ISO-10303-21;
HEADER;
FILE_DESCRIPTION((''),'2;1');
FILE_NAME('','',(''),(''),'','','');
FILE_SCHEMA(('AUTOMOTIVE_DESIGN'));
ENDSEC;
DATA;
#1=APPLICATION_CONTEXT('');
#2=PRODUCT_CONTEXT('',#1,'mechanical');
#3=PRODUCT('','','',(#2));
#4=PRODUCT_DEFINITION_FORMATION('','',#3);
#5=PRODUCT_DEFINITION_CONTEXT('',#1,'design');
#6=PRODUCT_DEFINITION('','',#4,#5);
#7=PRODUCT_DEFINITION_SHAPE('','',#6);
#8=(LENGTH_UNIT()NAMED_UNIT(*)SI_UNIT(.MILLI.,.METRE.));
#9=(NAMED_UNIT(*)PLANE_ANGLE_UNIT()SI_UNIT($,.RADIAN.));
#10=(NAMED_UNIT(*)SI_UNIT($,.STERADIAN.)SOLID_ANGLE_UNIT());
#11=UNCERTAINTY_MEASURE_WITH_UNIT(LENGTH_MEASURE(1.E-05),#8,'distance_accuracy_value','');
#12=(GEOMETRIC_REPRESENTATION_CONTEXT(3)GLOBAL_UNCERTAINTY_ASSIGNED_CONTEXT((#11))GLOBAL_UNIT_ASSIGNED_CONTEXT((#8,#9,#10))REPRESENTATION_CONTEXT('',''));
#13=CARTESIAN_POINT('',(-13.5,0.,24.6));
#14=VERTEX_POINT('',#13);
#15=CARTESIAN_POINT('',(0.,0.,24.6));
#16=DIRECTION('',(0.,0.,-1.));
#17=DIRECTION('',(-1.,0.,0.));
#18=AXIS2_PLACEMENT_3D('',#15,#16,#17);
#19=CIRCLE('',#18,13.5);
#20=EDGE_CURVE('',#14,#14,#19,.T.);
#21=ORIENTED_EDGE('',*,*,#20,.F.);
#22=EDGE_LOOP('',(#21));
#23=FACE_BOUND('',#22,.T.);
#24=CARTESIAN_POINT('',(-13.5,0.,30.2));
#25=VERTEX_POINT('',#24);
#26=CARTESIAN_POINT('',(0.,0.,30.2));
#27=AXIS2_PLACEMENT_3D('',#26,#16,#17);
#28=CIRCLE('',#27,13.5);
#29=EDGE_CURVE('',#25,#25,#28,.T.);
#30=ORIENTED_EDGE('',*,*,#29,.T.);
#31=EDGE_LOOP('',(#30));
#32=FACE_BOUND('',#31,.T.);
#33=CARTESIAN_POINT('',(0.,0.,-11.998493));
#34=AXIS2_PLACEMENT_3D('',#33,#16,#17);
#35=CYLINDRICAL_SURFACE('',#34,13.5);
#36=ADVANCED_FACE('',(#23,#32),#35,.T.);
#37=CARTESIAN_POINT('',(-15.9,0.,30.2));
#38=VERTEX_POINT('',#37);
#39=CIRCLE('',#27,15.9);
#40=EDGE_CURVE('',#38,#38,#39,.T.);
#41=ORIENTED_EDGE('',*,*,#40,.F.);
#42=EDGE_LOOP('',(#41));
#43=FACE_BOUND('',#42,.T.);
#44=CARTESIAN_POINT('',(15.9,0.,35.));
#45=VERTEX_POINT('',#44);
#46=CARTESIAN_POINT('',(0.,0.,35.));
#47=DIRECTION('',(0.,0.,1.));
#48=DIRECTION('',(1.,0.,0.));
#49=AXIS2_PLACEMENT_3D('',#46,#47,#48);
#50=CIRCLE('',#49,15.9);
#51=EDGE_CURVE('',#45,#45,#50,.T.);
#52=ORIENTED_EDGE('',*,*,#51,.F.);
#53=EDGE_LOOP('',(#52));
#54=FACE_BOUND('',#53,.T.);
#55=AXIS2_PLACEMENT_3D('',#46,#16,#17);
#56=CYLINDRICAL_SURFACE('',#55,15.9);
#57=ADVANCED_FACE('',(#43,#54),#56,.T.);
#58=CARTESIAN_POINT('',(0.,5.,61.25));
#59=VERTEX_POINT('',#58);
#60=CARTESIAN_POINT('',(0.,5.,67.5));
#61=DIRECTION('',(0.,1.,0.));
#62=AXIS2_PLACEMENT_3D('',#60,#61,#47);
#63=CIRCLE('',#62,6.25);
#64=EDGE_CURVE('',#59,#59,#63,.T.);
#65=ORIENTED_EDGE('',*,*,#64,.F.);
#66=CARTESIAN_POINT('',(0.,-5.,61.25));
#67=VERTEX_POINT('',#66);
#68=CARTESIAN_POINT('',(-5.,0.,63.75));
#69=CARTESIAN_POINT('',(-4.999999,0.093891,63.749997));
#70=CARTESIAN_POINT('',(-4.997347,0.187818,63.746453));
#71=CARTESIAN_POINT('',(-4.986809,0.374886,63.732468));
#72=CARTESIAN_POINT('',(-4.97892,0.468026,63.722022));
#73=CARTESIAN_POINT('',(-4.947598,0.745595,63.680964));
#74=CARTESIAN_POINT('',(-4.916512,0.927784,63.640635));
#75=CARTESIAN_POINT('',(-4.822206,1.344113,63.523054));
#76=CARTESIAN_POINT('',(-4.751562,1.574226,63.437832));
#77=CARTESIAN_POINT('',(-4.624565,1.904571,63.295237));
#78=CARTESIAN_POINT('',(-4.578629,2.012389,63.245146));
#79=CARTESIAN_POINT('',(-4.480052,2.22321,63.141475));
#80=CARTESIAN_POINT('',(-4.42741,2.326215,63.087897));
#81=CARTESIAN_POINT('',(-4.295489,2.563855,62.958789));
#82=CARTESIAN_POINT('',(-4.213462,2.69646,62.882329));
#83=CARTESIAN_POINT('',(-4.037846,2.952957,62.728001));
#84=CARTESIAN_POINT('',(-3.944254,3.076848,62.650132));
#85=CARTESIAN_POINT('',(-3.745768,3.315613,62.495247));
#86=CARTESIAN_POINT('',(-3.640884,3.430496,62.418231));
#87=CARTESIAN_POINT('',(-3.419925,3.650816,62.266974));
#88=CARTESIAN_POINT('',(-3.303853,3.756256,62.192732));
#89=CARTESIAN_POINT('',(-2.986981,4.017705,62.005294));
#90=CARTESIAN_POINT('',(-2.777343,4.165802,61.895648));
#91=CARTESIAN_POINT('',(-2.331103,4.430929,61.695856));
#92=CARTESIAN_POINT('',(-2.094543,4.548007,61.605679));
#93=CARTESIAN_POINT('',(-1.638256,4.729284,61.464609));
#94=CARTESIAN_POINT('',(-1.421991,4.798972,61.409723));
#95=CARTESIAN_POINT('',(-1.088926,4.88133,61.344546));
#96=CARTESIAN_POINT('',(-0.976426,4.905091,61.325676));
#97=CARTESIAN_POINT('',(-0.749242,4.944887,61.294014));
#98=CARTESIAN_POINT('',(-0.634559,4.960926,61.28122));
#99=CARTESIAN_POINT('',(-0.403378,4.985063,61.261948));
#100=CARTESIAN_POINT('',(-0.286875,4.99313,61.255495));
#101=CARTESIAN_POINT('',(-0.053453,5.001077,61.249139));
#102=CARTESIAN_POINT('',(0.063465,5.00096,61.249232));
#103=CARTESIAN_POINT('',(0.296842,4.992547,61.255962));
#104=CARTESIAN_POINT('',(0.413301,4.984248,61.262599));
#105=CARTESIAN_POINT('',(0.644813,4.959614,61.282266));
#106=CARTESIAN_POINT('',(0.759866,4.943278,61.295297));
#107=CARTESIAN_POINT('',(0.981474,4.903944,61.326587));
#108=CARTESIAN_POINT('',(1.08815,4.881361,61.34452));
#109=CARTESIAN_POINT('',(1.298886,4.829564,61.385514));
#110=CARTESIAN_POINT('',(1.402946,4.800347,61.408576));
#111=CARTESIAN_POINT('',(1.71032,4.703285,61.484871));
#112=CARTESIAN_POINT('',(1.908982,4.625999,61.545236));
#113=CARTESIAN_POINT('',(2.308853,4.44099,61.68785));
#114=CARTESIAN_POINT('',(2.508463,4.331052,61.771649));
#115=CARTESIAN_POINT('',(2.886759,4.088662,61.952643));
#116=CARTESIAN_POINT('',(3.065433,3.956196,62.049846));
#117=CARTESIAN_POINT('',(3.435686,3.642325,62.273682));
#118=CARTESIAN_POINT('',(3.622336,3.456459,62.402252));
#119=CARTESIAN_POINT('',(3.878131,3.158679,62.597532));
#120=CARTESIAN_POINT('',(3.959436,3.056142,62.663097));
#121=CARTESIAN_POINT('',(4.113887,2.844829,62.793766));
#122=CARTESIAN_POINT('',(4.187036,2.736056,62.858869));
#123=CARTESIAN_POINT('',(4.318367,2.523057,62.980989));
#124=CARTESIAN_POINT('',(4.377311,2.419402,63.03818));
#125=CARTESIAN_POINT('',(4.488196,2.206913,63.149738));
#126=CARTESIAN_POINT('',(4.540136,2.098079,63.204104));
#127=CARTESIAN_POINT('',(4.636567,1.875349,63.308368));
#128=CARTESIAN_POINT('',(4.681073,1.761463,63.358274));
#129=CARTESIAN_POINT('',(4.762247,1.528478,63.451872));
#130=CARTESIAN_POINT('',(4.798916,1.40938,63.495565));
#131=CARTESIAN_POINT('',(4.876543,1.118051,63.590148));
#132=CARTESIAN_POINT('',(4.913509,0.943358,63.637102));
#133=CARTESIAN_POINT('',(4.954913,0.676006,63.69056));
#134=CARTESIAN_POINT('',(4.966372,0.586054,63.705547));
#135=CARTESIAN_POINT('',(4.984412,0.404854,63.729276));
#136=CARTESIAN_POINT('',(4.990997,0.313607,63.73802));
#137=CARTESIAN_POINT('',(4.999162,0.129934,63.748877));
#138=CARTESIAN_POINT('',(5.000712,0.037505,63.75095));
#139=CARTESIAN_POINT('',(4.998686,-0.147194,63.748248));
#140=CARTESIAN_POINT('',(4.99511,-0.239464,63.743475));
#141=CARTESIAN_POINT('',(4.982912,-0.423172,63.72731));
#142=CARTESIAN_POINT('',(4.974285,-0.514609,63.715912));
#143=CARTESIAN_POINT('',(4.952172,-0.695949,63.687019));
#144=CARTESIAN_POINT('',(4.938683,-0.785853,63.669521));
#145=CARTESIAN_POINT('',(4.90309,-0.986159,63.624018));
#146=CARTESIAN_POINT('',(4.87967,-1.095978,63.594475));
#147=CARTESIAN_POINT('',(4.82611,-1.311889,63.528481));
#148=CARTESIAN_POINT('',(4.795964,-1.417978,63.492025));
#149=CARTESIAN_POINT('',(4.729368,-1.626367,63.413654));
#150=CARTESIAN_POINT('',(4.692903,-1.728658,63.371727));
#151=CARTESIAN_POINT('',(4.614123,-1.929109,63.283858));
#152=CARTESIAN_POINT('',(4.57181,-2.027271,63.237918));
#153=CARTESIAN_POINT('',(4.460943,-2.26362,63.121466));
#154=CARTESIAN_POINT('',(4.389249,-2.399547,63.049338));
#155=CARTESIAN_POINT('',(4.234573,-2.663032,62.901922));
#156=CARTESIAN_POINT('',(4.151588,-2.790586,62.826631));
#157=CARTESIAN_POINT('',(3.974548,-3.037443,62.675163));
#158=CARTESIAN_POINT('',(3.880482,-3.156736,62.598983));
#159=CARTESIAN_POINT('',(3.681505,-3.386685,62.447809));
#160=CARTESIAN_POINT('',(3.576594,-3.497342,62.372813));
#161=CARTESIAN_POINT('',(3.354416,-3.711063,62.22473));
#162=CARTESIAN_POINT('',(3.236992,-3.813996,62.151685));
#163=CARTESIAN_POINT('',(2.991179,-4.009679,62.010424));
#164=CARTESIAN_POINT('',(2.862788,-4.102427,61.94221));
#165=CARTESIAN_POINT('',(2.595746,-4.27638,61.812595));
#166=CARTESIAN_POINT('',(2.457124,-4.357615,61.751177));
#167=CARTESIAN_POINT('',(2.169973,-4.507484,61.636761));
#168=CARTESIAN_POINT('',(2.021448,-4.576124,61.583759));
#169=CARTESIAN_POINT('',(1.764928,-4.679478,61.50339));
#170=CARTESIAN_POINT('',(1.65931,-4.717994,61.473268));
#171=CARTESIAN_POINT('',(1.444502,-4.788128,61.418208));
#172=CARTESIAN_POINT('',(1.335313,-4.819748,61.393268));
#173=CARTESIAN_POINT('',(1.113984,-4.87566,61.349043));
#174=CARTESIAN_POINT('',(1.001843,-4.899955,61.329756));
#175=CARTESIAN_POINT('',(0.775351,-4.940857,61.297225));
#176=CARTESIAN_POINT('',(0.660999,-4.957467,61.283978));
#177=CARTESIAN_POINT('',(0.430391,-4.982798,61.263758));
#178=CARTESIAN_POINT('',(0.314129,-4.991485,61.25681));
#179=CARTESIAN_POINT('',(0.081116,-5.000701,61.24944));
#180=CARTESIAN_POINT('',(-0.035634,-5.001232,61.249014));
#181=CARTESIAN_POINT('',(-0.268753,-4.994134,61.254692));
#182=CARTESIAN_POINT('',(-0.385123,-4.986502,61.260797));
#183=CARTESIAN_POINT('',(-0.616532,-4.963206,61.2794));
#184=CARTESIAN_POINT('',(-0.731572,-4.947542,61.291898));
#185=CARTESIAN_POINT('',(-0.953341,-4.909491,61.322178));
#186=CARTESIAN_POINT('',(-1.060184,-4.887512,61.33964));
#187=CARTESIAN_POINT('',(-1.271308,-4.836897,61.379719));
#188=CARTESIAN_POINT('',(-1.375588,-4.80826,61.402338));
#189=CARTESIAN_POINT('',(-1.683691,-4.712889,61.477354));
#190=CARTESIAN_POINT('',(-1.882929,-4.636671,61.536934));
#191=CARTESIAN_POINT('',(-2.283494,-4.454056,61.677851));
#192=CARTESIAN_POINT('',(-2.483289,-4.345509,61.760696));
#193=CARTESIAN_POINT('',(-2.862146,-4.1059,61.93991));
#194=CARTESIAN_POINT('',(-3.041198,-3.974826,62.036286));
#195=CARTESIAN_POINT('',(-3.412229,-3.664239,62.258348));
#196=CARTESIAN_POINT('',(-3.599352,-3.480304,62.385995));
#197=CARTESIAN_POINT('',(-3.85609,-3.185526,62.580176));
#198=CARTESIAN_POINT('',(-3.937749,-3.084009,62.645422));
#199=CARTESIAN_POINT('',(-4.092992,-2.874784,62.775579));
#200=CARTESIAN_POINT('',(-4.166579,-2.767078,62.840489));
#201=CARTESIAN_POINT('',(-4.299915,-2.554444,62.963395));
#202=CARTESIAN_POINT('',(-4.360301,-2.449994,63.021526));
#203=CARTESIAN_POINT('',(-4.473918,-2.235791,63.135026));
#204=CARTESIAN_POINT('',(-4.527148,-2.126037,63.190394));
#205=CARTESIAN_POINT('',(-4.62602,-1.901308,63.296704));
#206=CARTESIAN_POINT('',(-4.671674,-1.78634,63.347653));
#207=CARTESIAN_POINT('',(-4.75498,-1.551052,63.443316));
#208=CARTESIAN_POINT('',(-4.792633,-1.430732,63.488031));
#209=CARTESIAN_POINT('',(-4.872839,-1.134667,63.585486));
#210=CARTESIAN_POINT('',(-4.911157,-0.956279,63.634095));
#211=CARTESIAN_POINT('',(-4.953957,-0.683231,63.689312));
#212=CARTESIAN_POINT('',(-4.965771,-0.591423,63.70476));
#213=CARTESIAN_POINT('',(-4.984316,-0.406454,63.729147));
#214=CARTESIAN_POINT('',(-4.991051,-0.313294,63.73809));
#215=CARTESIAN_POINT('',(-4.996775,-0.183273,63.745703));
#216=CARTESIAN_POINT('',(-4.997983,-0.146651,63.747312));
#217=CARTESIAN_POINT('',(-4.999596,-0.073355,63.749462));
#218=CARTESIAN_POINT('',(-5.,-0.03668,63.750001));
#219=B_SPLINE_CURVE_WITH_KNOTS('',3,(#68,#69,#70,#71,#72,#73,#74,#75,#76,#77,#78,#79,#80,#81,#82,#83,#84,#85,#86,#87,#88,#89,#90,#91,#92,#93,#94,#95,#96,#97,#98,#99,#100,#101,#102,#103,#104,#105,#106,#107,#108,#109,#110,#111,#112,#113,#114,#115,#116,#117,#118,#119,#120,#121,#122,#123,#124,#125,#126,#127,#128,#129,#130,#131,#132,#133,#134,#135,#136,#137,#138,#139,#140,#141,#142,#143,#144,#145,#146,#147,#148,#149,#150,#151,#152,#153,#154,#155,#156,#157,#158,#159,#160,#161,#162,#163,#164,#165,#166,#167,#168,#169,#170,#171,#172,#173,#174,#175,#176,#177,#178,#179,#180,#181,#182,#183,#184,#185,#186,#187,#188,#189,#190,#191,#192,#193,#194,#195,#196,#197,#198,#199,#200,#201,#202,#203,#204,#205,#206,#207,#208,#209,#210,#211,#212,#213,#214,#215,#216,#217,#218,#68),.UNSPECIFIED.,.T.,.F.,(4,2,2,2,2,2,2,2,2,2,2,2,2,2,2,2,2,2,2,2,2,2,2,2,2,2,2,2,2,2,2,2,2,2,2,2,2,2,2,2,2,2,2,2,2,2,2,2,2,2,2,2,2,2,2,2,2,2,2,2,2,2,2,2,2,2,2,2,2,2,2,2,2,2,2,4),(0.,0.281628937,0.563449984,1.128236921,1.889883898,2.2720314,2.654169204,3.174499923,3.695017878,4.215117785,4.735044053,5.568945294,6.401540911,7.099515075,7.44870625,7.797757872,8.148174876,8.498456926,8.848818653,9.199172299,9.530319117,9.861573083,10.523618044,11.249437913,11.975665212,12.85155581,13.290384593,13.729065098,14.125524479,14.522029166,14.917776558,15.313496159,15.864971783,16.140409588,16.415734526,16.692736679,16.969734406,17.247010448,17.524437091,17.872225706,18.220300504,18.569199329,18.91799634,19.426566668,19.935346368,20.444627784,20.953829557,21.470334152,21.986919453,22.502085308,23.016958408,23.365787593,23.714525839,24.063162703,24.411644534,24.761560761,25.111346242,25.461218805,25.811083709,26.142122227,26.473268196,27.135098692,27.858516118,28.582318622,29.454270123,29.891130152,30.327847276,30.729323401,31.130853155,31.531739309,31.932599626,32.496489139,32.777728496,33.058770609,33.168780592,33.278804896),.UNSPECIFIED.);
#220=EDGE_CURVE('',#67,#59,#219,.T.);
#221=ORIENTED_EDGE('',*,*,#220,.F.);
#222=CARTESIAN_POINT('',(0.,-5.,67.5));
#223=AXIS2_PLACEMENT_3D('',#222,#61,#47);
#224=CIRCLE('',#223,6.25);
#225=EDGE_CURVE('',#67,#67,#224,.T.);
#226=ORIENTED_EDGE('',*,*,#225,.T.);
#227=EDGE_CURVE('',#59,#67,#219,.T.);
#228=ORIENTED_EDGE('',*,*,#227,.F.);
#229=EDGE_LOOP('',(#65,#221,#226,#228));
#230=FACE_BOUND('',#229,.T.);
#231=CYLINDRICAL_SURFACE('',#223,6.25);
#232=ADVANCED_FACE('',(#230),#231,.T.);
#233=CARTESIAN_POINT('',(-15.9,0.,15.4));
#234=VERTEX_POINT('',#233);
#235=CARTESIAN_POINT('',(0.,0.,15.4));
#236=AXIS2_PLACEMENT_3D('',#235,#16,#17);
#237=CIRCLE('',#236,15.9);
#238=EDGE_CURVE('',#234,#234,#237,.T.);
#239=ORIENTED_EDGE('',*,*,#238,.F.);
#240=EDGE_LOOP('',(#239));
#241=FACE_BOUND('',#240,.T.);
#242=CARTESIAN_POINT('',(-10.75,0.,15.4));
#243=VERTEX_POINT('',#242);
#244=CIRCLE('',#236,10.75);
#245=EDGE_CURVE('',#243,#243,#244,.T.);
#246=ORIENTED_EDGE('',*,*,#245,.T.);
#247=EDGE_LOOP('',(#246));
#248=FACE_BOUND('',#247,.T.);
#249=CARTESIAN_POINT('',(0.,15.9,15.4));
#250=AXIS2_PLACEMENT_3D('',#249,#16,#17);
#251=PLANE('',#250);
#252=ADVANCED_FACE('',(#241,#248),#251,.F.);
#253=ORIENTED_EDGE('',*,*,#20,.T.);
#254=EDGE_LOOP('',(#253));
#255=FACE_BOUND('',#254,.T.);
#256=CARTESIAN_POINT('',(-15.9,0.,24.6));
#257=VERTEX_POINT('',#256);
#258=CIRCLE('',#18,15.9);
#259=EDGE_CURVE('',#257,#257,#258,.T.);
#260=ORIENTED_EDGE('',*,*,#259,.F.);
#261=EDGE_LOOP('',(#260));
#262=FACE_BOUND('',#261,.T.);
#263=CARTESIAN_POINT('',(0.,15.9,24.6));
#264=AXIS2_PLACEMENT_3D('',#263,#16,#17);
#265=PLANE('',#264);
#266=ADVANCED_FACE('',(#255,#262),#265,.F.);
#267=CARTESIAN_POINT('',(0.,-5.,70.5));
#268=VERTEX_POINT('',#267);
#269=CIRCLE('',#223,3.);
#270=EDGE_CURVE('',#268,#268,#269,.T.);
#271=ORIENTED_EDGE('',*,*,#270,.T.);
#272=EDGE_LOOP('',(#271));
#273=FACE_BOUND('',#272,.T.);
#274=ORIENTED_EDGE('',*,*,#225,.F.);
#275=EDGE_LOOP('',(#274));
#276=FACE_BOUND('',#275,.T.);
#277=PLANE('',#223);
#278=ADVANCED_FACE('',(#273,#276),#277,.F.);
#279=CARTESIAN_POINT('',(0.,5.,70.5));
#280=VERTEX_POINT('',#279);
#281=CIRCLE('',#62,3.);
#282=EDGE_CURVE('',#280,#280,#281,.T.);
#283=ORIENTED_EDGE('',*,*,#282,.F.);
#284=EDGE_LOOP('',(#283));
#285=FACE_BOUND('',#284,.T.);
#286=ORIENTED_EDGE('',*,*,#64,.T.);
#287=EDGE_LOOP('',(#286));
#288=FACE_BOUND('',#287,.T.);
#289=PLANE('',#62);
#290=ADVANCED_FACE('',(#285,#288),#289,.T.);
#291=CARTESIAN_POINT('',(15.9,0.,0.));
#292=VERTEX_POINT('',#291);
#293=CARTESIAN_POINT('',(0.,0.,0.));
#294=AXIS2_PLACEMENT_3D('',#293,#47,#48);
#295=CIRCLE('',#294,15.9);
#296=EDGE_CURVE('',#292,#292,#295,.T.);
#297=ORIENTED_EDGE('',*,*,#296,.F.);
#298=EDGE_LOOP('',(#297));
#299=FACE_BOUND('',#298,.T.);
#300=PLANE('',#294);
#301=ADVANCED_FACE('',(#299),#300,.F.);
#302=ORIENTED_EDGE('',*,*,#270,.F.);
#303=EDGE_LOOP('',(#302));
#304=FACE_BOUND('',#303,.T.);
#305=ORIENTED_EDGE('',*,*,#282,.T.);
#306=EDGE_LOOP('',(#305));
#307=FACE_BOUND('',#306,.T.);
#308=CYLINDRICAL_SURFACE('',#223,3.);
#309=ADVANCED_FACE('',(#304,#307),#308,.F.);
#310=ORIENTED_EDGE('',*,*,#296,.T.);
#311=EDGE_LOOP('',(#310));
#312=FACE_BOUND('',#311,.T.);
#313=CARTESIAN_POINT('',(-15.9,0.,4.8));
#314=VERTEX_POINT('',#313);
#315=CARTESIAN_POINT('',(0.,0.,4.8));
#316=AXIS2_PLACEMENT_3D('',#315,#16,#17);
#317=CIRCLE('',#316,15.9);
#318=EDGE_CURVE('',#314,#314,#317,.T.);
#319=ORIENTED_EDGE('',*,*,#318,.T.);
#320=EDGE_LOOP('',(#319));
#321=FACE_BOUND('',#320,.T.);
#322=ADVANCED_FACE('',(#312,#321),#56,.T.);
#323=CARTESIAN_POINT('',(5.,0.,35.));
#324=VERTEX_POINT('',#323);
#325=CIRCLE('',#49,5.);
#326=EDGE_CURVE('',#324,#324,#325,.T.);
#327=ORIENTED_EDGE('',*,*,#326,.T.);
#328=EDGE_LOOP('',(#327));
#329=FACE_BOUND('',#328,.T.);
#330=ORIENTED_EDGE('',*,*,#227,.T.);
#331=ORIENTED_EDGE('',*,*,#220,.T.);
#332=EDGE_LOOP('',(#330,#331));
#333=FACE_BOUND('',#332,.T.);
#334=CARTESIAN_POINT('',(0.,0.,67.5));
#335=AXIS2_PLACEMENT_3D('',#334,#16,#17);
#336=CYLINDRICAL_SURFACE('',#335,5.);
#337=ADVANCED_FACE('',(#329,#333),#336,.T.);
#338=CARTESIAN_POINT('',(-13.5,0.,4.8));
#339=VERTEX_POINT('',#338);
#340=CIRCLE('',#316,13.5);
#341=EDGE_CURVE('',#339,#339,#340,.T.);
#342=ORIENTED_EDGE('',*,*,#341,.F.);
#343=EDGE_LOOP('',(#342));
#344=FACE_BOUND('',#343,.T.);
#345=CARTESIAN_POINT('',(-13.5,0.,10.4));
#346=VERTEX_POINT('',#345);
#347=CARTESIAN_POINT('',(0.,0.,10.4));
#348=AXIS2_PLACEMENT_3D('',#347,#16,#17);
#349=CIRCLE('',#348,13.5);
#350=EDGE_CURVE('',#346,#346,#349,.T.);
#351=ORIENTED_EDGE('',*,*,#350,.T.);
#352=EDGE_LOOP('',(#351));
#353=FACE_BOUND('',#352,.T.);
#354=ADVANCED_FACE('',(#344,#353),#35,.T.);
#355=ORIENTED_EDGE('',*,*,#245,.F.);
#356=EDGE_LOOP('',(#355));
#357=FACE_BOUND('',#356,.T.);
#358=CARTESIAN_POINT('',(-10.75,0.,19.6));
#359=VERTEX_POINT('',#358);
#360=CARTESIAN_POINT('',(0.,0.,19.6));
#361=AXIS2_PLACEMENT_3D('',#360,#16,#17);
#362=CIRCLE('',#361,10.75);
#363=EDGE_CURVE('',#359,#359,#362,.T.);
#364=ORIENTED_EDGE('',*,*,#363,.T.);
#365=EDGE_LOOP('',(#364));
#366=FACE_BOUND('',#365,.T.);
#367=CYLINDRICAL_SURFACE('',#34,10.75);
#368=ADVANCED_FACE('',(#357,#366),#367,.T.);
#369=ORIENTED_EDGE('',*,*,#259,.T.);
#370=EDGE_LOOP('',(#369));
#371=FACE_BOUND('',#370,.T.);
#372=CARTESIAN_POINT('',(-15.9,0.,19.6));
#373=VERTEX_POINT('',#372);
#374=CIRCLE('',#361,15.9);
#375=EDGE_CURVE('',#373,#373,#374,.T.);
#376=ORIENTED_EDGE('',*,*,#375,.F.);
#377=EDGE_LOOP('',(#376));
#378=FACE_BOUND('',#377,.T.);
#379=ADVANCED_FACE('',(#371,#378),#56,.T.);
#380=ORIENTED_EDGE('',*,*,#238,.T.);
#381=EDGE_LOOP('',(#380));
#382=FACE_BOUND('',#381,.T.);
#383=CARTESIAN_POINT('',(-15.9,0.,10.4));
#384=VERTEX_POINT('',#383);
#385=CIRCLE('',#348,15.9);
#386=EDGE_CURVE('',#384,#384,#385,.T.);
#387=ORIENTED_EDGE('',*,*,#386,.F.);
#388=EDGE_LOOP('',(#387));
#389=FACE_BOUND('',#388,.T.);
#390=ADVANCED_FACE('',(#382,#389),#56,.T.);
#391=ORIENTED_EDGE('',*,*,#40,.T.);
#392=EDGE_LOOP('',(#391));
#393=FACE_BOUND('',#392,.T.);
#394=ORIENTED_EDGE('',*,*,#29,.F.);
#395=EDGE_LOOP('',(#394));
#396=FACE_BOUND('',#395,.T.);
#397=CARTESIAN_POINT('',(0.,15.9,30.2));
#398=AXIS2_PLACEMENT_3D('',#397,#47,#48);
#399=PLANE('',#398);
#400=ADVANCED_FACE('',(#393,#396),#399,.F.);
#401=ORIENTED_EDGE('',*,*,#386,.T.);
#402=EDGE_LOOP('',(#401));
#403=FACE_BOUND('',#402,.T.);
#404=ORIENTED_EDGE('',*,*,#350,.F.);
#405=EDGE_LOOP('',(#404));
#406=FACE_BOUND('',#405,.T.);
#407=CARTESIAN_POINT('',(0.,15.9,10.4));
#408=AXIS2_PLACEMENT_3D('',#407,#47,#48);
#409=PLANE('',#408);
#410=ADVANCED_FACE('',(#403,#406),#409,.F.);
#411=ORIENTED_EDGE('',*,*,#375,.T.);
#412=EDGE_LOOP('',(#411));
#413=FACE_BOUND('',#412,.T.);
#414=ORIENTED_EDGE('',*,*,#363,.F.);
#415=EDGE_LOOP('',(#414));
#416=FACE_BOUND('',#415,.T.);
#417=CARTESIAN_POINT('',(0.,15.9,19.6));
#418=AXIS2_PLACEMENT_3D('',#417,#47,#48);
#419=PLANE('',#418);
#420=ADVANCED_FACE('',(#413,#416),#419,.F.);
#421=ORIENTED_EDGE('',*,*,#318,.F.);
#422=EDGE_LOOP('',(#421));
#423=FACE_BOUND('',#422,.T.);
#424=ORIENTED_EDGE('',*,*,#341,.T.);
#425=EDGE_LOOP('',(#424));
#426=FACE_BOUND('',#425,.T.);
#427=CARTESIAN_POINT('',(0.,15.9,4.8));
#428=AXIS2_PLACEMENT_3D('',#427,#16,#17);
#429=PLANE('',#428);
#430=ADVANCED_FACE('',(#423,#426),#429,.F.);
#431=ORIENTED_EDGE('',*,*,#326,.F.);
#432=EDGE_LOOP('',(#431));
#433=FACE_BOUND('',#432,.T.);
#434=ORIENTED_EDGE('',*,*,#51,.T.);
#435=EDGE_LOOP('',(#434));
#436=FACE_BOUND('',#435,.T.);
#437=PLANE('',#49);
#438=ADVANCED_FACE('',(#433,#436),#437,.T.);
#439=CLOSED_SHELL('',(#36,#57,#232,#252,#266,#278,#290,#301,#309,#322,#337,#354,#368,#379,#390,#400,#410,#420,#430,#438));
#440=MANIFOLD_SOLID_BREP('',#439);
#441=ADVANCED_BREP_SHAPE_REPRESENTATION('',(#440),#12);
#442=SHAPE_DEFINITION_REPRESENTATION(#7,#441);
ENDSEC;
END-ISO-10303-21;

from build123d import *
from build123d.topology import SkipClean

# Parameters (mm, degrees)
SKETCH3_R                = 15.9
BOSS_EXTRUDE1_DEPTH      = 35
SKETCH4_R                = 5
BOSS_EXTRUDE2_DEPTH      = 32.5
SKETCH7_W                = 4.2
SKETCH7_H                = 5.15
SKETCH7_W_2              = 5.6
SKETCH7_H_2              = 2.4
BOSS_EXTRUDE3_DEPTH      = 5
BOSS_EXTRUDE3_DEPTH_BACK = 5
SKETCH8_R                = 6.25
SKETCH8_R_2              = 3
SKETCH9_R                = 3
CUT_EXTRUDE1_DEPTH       = 16


with BuildPart() as part:
    # Sketch3 → Boss-Extrude1 (new body)
    with BuildSketch(Plane.XY):
        Circle(SKETCH3_R)
    extrude(amount=BOSS_EXTRUDE1_DEPTH)

    # Sketch4 → Boss-Extrude2 (add)
    with BuildSketch(Plane.XY.offset(35)):
        Circle(SKETCH4_R)
    extrude(amount=BOSS_EXTRUDE2_DEPTH)

    # Sketch7 → Cut-Revolve1 (revolve, cut)
    with BuildSketch(Plane(origin=(0, 0, 0), x_dir=(0, 0, -1), z_dir=(1, 0, 0))):
        with Locations((-17.5, 13.325)):
            Rectangle(SKETCH7_W, SKETCH7_H)
        with Locations((-27.4, 14.7)):
            Rectangle(SKETCH7_W_2, SKETCH7_H_2)
        with Locations((-7.6, 14.7)):
            Rectangle(SKETCH7_W_2, SKETCH7_H_2)
    revolve(axis=Axis((0, 0, -11.998492927), (0, 0, 1)), mode=Mode.SUBTRACT)

    # Sketch8 → Boss-Extrude3 (add, two sides: drawn at the far end of the back side and taken through both)
    with SkipClean():  # the faces are left unmerged after this step: merging them gives an invalid solid
        with BuildSketch(Plane(origin=(0, 0, 0), x_dir=(1, 0, 0), z_dir=(0, 1, 0)).offset(-BOSS_EXTRUDE3_DEPTH_BACK)):
            with Locations((0, -67.5)):
                Circle(SKETCH8_R)
            with Locations((0, -67.5)):
                Circle(SKETCH8_R_2, mode=Mode.SUBTRACT)
        extrude(amount=BOSS_EXTRUDE3_DEPTH + BOSS_EXTRUDE3_DEPTH_BACK)

    # Sketch9 → Cut-Extrude1 (cut)
    with SkipClean():  # the faces are left unmerged after this step: merging them gives an invalid solid
        with BuildSketch(Plane(origin=(0, 5, 0), x_dir=(1, 0, 0), z_dir=(0, 1, 0))):
            with Locations((0, -67.5)):
                Circle(SKETCH9_R)
        extrude(amount=-CUT_EXTRUDE1_DEPTH, mode=Mode.SUBTRACT)


solid = part.part
